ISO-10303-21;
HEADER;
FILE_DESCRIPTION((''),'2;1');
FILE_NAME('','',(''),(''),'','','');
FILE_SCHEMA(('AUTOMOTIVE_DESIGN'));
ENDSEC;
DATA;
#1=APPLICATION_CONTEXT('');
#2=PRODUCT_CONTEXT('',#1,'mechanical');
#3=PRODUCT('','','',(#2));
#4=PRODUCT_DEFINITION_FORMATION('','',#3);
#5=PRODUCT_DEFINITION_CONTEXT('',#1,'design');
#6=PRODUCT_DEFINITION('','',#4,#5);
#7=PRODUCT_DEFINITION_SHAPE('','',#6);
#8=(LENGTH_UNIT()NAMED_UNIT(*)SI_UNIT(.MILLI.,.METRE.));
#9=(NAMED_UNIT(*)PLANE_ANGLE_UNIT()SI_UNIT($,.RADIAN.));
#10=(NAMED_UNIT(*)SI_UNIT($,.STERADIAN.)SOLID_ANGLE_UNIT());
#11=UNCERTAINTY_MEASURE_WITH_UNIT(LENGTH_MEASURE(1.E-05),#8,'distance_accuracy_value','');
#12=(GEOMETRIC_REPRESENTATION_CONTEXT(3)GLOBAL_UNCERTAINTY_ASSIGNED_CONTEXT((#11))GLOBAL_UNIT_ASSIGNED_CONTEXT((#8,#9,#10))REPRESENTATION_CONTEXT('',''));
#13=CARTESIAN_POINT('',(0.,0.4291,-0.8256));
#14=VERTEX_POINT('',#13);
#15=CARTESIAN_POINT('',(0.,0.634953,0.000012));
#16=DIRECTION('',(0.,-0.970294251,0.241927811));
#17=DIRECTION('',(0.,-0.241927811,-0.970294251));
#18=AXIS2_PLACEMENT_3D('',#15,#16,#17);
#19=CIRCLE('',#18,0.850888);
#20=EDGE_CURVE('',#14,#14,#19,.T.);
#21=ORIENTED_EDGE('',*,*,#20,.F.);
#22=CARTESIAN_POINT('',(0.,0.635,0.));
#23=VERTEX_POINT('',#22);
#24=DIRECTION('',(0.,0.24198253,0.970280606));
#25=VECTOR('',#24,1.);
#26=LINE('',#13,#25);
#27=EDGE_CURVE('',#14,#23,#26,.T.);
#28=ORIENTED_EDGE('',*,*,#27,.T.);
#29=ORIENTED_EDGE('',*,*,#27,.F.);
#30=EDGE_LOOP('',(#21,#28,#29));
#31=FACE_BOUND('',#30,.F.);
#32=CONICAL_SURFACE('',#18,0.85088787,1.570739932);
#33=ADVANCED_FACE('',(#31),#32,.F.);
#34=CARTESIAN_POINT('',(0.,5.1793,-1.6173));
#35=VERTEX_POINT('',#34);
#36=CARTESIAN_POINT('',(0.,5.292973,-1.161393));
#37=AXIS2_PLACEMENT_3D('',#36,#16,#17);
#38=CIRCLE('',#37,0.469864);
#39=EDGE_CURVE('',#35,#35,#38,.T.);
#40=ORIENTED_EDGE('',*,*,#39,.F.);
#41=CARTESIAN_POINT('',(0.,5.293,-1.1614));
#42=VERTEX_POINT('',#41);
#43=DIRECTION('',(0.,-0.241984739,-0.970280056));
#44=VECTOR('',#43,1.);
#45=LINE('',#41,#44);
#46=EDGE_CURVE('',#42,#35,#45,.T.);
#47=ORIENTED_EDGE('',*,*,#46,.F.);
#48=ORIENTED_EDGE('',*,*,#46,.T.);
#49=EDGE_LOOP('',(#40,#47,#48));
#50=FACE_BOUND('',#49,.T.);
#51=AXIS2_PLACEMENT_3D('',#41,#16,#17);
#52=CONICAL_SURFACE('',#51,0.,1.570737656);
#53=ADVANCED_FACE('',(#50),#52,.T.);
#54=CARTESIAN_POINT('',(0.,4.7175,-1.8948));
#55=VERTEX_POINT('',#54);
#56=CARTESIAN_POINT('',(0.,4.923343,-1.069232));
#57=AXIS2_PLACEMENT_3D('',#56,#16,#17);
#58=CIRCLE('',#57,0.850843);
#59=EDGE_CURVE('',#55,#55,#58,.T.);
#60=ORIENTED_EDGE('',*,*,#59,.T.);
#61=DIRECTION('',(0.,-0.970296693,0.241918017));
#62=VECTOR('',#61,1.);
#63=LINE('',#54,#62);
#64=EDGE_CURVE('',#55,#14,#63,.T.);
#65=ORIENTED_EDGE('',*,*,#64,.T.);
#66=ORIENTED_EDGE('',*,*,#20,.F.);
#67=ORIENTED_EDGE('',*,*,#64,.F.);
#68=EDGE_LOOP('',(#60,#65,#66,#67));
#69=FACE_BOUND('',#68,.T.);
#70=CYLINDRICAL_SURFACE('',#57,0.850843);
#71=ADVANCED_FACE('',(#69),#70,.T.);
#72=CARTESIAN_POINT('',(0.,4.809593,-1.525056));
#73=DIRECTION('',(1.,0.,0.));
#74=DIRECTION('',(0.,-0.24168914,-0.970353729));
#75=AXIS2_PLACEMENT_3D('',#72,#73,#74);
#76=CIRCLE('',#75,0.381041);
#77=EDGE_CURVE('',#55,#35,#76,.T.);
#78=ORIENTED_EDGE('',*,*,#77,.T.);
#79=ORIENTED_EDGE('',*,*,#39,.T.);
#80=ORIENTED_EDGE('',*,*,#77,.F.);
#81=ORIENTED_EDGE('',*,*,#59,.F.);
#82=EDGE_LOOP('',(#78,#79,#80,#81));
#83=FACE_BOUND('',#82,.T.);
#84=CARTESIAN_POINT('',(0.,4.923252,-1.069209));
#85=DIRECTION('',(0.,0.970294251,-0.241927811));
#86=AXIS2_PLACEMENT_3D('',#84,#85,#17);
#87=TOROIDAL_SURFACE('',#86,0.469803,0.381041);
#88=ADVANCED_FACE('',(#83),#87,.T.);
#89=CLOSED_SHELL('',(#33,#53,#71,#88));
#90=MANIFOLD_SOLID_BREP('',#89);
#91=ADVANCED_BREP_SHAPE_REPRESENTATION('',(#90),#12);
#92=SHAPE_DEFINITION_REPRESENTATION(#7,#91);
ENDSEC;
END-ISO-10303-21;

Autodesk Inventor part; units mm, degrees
sketch "Sketch_1" plane through (0, 0, 0) normal (1, 0, 0) x (0, 1, 0)
  line L0 (0.635, 0) -> (5.293, -1.1614)
  line L1 (5.293, -1.1614) -> (5.1793, -1.6173)
  arc A0 (4.7175, -1.8948) -> (5.1793, -1.6173) centre (4.8096, -1.5251) ccw
  line L2 (4.7175, -1.8948) -> (0.4291, -0.8256)
  line L3 (0.4291, -0.8256) -> (0.635, 0)
  line L4 (0.635, 0) -> (5.293, -1.1614)
revolve "Revolution1" add sketch "Sketch_1" angle 360 about axis through (0, 0.635, 0) along (0, -0.9702957, 0.2419219)
ref_plane "to_body_XY" through (0, 0, 0) normal (0, 1, 0) x (1, 0, 0)
ref_plane "to_body_YZ" through (0, 0, 0) normal (1, 0, 0) x (0, 0, -1)
ref_plane "to_body_ZX" through (0, 0, 0) normal (0, 0, -1) x (0, 1, 0)
properties part number "GC-actuator"
